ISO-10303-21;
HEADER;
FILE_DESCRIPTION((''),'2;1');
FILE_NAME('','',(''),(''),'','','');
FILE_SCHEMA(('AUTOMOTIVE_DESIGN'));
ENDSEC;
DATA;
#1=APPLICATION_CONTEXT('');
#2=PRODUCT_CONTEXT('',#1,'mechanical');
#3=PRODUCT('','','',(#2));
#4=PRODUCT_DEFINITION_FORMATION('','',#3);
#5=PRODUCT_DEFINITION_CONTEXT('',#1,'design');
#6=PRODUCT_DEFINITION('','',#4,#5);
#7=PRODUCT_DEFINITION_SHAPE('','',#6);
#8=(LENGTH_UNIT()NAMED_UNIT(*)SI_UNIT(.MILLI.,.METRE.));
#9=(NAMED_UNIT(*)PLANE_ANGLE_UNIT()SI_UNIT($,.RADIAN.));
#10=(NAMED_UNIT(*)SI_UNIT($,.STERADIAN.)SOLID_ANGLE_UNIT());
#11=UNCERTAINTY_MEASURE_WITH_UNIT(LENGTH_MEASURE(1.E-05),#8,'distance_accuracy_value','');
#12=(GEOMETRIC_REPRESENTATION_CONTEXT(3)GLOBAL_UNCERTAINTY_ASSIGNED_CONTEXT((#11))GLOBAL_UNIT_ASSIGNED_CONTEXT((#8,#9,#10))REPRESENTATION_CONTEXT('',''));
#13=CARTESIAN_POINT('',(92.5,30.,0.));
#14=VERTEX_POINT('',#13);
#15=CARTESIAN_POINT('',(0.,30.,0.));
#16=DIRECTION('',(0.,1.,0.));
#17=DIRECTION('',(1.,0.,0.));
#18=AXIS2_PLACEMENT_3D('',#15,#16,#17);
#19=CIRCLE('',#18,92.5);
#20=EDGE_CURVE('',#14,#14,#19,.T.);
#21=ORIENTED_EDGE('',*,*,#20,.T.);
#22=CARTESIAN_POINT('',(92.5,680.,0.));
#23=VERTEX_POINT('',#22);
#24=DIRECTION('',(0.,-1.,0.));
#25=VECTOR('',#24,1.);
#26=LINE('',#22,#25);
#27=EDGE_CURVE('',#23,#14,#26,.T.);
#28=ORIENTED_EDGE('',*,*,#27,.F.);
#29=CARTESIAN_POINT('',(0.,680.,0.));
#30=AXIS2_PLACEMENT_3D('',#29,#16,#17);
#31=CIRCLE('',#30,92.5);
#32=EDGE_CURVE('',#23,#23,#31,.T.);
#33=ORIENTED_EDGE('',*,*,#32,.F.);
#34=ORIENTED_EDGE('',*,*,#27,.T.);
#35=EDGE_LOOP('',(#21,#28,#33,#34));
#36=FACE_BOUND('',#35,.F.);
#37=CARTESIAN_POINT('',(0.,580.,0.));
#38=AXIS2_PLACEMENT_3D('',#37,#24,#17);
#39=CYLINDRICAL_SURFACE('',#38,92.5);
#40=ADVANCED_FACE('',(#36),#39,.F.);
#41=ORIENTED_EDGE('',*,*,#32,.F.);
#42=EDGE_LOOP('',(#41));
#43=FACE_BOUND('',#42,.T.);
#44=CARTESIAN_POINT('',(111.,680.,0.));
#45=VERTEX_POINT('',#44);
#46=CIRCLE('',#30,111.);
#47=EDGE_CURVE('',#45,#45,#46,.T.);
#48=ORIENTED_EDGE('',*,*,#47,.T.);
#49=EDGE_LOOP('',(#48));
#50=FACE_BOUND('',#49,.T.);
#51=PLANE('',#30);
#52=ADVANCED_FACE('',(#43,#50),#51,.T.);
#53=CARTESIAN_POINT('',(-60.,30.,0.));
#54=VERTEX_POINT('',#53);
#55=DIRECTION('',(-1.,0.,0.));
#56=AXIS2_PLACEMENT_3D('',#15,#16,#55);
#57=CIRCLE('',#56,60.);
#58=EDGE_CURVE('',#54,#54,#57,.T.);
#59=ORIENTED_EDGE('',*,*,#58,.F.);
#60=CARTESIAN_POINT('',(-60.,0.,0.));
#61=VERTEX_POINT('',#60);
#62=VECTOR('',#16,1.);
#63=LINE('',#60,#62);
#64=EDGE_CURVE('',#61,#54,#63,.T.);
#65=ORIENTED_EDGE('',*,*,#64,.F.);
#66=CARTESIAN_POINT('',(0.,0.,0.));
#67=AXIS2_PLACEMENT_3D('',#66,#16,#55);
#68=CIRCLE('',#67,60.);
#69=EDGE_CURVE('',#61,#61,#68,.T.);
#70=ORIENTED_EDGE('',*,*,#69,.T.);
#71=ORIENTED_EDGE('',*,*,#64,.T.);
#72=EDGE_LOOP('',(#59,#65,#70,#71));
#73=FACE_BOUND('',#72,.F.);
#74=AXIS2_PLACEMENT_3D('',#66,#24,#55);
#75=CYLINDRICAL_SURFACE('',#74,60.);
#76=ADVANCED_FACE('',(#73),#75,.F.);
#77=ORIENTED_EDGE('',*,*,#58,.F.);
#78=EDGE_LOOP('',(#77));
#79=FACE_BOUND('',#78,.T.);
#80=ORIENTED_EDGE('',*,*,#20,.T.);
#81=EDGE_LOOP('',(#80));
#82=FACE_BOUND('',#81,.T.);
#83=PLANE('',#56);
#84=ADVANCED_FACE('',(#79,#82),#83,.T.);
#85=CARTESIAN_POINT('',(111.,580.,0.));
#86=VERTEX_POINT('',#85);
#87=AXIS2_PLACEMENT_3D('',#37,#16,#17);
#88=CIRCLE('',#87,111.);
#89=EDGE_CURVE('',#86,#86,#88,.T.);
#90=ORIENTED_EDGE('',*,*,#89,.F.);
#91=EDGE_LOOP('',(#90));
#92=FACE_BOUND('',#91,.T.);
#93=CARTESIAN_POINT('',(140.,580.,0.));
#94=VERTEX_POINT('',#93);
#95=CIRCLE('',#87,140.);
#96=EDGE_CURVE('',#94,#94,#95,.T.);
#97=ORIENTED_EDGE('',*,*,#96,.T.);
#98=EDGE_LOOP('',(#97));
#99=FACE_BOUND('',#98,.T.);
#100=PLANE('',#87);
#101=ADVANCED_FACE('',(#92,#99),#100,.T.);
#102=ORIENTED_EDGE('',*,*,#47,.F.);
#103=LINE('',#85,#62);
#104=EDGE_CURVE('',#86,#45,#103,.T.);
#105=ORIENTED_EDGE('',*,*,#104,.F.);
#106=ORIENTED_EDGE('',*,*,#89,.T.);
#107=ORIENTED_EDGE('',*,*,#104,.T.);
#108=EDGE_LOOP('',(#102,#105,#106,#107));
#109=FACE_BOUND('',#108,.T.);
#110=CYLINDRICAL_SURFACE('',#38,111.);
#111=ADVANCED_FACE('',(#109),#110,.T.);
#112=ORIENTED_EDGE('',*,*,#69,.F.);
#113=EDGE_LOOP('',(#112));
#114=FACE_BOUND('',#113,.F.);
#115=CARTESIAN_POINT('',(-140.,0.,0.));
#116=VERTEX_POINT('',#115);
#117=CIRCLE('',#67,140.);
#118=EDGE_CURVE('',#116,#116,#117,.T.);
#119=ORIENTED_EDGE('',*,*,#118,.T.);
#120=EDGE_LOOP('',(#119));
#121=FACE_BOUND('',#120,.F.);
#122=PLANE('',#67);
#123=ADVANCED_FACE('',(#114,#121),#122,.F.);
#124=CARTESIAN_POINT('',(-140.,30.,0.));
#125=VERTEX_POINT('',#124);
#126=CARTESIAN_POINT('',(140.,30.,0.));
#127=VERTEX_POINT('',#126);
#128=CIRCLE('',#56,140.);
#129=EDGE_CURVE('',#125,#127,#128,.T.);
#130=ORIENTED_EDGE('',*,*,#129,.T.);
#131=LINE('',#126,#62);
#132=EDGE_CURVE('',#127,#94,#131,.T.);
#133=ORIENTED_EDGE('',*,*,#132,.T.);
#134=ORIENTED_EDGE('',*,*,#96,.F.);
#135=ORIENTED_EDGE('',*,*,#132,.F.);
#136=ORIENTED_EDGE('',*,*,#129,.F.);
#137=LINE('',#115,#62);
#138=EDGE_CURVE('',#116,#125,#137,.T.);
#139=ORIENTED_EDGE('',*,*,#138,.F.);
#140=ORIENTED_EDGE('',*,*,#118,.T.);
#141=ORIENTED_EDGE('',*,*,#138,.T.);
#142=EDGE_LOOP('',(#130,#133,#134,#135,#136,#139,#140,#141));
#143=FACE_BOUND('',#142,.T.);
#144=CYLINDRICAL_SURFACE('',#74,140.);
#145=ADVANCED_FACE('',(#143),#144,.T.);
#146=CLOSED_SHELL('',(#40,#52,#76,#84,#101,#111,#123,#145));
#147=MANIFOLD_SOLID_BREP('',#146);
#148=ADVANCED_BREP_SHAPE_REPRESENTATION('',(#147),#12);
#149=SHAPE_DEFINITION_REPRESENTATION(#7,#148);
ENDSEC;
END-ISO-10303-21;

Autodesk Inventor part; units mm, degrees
ref_plane "YZ Plane" through (0, 0, 0) normal (1, 0, 0) x (0, 1, 0)
ref_plane "XZ Plane" through (0, 0, 0) normal (0, 1, 0) x (-1, 0, 0)
ref_plane "XY Plane" through (0, 0, 0) normal (0, 0, 1) x (1, 0, 0)
sketch "Sketch1" plane through (0, 0, 0) normal (0, 1, 0) x (-1, 0, 0)
  circle A0 centre (0, 0) radius 140
  circle A1 centre (0, 0) radius 60
  dimension "d0" = 280
  dimension "d1" = 120
extrude "Extrusion1" add sketch "Sketch1" along normal blind 30
sketch "Sketch3" plane through (0, 30, 0) normal (0, 1, 0) x (1, 0, 0)
  circle A0 centre (0, 0) radius 92.5
  circle A1 centre (0, 0) radius 140
  dimension "d12" = 185
  dimension "d18" = 280
extrude "Extrusion3" add sketch "Sketch3" along normal blind 550
sketch "Sketch4" plane through (0, 580, 0) normal (0, 1, 0) x (1, 0, 0)
  circle A0 centre (0, 0) radius 60 projected
  circle A1 centre (0, 0) radius 111
  circle A2 centre (0, 0) radius 92.5
  dimension "d15" = 222
  dimension "d19" = 185
extrude "Extrusion4" add sketch "Sketch4" along normal blind 100 contours A1
properties part number "taoa"
